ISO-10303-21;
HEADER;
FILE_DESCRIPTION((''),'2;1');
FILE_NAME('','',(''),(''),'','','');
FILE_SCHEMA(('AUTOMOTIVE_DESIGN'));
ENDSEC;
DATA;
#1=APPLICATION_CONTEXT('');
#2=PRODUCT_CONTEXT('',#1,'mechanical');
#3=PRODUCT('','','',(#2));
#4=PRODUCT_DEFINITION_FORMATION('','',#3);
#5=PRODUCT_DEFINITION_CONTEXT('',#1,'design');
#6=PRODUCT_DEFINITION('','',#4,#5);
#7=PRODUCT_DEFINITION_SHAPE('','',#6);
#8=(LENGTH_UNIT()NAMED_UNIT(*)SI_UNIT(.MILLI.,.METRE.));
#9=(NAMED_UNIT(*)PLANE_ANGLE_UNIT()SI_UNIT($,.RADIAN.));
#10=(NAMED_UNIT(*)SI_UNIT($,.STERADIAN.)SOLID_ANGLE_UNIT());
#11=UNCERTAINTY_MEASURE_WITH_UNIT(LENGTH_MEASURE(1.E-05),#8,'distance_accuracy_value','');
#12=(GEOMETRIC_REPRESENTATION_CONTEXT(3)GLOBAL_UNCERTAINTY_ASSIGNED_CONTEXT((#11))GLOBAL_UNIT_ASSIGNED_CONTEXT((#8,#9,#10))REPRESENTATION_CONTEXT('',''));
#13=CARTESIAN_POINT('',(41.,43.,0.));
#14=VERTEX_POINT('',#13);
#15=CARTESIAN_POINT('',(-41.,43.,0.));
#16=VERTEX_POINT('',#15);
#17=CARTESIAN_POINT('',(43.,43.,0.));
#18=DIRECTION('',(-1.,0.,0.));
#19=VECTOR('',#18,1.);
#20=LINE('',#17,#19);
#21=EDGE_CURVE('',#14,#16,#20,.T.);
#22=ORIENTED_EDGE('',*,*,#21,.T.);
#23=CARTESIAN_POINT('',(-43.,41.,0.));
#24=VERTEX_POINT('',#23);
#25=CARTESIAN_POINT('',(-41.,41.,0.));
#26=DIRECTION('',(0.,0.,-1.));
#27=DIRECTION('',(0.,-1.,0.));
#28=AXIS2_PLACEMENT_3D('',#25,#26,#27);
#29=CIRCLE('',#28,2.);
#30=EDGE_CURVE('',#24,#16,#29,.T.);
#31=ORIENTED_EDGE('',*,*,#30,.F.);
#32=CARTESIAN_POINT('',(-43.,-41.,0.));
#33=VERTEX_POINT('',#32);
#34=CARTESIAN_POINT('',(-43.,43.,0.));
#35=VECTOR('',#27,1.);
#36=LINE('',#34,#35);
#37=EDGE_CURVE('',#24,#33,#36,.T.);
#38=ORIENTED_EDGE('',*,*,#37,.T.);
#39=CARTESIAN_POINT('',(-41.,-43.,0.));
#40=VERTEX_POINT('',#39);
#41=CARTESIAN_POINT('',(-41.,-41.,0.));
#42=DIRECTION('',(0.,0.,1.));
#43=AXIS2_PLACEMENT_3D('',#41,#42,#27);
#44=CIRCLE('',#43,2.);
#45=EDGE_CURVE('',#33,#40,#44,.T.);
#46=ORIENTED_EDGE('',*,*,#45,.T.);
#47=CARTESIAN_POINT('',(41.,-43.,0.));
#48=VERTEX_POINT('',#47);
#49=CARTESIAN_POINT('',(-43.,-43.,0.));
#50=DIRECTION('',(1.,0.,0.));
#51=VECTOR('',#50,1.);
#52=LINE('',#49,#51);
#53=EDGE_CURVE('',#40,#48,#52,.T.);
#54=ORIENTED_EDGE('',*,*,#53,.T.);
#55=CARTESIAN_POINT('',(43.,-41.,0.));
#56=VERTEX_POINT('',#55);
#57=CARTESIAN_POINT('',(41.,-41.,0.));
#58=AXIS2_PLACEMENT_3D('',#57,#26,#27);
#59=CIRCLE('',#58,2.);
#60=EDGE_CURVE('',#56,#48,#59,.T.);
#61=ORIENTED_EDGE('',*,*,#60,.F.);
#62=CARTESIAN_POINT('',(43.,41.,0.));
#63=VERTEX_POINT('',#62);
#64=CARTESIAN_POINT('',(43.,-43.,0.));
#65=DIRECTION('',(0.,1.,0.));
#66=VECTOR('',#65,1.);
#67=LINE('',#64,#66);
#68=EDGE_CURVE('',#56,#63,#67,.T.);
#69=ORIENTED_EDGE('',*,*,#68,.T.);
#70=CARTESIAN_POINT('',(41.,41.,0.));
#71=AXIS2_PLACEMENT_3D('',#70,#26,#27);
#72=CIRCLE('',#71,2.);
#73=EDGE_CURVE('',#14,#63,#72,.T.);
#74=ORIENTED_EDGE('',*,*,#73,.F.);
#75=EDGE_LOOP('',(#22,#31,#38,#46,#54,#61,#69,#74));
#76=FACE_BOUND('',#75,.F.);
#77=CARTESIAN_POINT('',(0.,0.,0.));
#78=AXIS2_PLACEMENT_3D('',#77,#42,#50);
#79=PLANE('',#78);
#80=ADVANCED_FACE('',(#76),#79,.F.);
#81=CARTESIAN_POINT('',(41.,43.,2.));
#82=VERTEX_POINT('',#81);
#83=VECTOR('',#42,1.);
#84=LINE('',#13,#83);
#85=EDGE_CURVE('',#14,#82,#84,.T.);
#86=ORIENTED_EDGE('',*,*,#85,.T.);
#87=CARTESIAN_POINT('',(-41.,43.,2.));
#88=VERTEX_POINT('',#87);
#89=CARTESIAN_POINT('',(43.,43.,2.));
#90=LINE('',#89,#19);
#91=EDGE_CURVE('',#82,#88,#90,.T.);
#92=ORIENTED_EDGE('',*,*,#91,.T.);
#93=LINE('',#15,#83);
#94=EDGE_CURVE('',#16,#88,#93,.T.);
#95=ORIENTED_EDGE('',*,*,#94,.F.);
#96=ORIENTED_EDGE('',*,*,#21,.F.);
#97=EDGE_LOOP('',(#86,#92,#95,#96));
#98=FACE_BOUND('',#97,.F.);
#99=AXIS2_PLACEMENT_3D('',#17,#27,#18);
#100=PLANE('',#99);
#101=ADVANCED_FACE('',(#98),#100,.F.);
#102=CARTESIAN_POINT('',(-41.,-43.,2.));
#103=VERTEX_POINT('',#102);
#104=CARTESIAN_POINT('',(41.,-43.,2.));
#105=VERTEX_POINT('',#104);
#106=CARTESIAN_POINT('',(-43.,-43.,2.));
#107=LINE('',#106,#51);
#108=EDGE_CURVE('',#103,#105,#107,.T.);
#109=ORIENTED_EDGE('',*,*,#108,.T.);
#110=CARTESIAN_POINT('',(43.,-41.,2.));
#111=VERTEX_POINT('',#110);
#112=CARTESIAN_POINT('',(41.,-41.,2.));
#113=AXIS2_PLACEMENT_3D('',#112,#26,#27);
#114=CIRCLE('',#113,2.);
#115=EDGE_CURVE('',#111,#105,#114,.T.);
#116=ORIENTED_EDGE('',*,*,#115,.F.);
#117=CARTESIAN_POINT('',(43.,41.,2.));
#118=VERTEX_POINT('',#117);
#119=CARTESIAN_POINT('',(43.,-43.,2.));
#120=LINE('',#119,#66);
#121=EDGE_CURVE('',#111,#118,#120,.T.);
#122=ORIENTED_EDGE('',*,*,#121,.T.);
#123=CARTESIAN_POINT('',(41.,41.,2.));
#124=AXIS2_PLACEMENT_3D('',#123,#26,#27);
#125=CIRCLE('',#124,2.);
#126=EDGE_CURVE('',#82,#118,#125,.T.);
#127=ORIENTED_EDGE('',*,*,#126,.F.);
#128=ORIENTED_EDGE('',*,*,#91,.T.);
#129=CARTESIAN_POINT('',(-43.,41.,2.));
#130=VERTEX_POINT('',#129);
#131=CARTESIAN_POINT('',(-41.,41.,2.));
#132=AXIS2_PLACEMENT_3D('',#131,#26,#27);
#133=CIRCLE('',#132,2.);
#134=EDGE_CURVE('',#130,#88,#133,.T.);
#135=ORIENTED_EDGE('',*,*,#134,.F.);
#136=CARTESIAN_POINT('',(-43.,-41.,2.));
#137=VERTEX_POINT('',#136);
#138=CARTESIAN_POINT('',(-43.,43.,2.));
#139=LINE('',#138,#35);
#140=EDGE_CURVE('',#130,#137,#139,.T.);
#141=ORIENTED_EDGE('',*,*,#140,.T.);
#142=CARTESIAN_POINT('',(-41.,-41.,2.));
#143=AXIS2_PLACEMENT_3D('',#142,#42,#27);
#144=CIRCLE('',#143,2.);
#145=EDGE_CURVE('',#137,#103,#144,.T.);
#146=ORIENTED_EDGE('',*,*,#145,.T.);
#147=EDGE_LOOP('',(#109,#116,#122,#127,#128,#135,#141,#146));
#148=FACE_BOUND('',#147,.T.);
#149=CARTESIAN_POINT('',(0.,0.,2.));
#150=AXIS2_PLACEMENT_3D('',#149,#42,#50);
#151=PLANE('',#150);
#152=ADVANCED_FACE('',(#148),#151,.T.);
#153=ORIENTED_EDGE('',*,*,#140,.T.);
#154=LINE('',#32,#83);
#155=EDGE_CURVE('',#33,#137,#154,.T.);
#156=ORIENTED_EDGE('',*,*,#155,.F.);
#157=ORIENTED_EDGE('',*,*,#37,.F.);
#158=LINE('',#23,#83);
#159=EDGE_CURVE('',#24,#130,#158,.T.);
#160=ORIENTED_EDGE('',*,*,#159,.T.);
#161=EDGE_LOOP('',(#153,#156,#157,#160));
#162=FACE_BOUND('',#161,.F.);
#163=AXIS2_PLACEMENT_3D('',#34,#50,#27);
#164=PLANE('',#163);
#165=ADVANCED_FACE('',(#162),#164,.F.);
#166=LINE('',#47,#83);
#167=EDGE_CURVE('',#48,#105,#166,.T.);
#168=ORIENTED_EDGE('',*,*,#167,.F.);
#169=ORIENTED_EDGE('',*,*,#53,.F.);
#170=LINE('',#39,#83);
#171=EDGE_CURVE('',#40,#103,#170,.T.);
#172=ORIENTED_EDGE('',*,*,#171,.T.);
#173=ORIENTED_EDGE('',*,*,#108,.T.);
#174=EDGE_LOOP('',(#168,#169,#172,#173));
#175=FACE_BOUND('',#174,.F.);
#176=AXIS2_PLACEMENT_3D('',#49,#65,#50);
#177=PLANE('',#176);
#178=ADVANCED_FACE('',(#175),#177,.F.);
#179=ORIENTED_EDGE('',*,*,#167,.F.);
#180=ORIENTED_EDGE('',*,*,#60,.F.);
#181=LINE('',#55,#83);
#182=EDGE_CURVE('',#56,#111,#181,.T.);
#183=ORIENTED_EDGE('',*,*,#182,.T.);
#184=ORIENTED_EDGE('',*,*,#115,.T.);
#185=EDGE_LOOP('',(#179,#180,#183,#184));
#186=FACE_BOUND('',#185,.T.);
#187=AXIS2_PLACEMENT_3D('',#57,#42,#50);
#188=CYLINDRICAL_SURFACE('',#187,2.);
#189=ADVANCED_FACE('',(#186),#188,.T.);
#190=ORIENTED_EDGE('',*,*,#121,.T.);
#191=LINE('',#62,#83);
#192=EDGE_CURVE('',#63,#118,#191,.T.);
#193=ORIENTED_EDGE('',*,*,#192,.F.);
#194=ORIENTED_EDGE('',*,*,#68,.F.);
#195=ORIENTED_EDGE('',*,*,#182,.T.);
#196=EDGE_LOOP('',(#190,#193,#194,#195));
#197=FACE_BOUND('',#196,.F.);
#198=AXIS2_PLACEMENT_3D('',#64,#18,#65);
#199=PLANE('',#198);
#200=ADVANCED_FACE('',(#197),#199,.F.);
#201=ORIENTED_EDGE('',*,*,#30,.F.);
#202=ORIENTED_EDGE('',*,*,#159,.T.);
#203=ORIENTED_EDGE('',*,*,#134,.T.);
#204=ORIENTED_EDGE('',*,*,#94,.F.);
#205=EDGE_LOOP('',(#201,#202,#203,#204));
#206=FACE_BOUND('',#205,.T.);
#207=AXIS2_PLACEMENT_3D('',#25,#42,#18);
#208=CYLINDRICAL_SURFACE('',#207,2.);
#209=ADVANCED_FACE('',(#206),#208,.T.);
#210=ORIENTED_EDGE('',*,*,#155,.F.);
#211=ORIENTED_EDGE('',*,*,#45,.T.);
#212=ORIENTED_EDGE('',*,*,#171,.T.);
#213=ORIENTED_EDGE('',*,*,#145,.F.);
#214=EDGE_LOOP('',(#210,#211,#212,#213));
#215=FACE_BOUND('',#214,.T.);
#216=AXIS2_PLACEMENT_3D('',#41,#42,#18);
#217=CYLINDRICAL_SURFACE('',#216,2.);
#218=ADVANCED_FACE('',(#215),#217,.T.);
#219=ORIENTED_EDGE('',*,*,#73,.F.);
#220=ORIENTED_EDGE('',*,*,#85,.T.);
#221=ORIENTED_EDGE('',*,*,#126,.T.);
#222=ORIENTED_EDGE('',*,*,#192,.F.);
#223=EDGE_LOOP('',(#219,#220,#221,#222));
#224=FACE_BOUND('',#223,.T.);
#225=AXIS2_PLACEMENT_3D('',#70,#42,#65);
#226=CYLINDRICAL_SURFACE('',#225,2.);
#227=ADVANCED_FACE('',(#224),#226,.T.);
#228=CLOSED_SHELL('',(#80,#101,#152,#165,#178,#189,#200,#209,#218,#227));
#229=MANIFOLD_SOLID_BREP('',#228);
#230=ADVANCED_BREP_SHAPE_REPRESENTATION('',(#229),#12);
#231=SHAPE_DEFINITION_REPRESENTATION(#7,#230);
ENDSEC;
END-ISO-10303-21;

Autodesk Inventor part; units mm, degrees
ref_plane "YZ Plane" through (0, 0, 0) normal (1, 0, 0) x (0, 1, 0)
ref_plane "XZ Plane" through (0, 0, 0) normal (0, 1, 0) x (-1, 0, 0)
ref_plane "XY Plane" through (0, 0, 0) normal (0, 0, 1) x (1, 0, 0)
sketch "Sketch1" plane through (0, 0, 0) normal (0, 0, 1) x (1, 0, 0)
  line L0 (-43, -43) -> (43, -43)
  line L1 (43, -43) -> (43, 43)
  line L2 (43, 43) -> (-43, 43)
  line L3 (-43, 43) -> (-43, -43)
  line L4 (-43, -43) -> (43, 43) construction
  line L5 (43, -43) -> (-43, 43) construction
  point P0 (0, 0)
  dimension "d154" = 86
  dimension "d155" = 86
extrude "Plate5" add sketch "Sketch1" along normal blind 2
fillet "Corner Round1" radius 2 4 edges at (43, 43, 1) (-43, 43, 1) (-43, -43, 1) (43, -43, 1)
properties part number "PRS 940-511 FDS 1000 CUP 1" material "Stainless Steel"
